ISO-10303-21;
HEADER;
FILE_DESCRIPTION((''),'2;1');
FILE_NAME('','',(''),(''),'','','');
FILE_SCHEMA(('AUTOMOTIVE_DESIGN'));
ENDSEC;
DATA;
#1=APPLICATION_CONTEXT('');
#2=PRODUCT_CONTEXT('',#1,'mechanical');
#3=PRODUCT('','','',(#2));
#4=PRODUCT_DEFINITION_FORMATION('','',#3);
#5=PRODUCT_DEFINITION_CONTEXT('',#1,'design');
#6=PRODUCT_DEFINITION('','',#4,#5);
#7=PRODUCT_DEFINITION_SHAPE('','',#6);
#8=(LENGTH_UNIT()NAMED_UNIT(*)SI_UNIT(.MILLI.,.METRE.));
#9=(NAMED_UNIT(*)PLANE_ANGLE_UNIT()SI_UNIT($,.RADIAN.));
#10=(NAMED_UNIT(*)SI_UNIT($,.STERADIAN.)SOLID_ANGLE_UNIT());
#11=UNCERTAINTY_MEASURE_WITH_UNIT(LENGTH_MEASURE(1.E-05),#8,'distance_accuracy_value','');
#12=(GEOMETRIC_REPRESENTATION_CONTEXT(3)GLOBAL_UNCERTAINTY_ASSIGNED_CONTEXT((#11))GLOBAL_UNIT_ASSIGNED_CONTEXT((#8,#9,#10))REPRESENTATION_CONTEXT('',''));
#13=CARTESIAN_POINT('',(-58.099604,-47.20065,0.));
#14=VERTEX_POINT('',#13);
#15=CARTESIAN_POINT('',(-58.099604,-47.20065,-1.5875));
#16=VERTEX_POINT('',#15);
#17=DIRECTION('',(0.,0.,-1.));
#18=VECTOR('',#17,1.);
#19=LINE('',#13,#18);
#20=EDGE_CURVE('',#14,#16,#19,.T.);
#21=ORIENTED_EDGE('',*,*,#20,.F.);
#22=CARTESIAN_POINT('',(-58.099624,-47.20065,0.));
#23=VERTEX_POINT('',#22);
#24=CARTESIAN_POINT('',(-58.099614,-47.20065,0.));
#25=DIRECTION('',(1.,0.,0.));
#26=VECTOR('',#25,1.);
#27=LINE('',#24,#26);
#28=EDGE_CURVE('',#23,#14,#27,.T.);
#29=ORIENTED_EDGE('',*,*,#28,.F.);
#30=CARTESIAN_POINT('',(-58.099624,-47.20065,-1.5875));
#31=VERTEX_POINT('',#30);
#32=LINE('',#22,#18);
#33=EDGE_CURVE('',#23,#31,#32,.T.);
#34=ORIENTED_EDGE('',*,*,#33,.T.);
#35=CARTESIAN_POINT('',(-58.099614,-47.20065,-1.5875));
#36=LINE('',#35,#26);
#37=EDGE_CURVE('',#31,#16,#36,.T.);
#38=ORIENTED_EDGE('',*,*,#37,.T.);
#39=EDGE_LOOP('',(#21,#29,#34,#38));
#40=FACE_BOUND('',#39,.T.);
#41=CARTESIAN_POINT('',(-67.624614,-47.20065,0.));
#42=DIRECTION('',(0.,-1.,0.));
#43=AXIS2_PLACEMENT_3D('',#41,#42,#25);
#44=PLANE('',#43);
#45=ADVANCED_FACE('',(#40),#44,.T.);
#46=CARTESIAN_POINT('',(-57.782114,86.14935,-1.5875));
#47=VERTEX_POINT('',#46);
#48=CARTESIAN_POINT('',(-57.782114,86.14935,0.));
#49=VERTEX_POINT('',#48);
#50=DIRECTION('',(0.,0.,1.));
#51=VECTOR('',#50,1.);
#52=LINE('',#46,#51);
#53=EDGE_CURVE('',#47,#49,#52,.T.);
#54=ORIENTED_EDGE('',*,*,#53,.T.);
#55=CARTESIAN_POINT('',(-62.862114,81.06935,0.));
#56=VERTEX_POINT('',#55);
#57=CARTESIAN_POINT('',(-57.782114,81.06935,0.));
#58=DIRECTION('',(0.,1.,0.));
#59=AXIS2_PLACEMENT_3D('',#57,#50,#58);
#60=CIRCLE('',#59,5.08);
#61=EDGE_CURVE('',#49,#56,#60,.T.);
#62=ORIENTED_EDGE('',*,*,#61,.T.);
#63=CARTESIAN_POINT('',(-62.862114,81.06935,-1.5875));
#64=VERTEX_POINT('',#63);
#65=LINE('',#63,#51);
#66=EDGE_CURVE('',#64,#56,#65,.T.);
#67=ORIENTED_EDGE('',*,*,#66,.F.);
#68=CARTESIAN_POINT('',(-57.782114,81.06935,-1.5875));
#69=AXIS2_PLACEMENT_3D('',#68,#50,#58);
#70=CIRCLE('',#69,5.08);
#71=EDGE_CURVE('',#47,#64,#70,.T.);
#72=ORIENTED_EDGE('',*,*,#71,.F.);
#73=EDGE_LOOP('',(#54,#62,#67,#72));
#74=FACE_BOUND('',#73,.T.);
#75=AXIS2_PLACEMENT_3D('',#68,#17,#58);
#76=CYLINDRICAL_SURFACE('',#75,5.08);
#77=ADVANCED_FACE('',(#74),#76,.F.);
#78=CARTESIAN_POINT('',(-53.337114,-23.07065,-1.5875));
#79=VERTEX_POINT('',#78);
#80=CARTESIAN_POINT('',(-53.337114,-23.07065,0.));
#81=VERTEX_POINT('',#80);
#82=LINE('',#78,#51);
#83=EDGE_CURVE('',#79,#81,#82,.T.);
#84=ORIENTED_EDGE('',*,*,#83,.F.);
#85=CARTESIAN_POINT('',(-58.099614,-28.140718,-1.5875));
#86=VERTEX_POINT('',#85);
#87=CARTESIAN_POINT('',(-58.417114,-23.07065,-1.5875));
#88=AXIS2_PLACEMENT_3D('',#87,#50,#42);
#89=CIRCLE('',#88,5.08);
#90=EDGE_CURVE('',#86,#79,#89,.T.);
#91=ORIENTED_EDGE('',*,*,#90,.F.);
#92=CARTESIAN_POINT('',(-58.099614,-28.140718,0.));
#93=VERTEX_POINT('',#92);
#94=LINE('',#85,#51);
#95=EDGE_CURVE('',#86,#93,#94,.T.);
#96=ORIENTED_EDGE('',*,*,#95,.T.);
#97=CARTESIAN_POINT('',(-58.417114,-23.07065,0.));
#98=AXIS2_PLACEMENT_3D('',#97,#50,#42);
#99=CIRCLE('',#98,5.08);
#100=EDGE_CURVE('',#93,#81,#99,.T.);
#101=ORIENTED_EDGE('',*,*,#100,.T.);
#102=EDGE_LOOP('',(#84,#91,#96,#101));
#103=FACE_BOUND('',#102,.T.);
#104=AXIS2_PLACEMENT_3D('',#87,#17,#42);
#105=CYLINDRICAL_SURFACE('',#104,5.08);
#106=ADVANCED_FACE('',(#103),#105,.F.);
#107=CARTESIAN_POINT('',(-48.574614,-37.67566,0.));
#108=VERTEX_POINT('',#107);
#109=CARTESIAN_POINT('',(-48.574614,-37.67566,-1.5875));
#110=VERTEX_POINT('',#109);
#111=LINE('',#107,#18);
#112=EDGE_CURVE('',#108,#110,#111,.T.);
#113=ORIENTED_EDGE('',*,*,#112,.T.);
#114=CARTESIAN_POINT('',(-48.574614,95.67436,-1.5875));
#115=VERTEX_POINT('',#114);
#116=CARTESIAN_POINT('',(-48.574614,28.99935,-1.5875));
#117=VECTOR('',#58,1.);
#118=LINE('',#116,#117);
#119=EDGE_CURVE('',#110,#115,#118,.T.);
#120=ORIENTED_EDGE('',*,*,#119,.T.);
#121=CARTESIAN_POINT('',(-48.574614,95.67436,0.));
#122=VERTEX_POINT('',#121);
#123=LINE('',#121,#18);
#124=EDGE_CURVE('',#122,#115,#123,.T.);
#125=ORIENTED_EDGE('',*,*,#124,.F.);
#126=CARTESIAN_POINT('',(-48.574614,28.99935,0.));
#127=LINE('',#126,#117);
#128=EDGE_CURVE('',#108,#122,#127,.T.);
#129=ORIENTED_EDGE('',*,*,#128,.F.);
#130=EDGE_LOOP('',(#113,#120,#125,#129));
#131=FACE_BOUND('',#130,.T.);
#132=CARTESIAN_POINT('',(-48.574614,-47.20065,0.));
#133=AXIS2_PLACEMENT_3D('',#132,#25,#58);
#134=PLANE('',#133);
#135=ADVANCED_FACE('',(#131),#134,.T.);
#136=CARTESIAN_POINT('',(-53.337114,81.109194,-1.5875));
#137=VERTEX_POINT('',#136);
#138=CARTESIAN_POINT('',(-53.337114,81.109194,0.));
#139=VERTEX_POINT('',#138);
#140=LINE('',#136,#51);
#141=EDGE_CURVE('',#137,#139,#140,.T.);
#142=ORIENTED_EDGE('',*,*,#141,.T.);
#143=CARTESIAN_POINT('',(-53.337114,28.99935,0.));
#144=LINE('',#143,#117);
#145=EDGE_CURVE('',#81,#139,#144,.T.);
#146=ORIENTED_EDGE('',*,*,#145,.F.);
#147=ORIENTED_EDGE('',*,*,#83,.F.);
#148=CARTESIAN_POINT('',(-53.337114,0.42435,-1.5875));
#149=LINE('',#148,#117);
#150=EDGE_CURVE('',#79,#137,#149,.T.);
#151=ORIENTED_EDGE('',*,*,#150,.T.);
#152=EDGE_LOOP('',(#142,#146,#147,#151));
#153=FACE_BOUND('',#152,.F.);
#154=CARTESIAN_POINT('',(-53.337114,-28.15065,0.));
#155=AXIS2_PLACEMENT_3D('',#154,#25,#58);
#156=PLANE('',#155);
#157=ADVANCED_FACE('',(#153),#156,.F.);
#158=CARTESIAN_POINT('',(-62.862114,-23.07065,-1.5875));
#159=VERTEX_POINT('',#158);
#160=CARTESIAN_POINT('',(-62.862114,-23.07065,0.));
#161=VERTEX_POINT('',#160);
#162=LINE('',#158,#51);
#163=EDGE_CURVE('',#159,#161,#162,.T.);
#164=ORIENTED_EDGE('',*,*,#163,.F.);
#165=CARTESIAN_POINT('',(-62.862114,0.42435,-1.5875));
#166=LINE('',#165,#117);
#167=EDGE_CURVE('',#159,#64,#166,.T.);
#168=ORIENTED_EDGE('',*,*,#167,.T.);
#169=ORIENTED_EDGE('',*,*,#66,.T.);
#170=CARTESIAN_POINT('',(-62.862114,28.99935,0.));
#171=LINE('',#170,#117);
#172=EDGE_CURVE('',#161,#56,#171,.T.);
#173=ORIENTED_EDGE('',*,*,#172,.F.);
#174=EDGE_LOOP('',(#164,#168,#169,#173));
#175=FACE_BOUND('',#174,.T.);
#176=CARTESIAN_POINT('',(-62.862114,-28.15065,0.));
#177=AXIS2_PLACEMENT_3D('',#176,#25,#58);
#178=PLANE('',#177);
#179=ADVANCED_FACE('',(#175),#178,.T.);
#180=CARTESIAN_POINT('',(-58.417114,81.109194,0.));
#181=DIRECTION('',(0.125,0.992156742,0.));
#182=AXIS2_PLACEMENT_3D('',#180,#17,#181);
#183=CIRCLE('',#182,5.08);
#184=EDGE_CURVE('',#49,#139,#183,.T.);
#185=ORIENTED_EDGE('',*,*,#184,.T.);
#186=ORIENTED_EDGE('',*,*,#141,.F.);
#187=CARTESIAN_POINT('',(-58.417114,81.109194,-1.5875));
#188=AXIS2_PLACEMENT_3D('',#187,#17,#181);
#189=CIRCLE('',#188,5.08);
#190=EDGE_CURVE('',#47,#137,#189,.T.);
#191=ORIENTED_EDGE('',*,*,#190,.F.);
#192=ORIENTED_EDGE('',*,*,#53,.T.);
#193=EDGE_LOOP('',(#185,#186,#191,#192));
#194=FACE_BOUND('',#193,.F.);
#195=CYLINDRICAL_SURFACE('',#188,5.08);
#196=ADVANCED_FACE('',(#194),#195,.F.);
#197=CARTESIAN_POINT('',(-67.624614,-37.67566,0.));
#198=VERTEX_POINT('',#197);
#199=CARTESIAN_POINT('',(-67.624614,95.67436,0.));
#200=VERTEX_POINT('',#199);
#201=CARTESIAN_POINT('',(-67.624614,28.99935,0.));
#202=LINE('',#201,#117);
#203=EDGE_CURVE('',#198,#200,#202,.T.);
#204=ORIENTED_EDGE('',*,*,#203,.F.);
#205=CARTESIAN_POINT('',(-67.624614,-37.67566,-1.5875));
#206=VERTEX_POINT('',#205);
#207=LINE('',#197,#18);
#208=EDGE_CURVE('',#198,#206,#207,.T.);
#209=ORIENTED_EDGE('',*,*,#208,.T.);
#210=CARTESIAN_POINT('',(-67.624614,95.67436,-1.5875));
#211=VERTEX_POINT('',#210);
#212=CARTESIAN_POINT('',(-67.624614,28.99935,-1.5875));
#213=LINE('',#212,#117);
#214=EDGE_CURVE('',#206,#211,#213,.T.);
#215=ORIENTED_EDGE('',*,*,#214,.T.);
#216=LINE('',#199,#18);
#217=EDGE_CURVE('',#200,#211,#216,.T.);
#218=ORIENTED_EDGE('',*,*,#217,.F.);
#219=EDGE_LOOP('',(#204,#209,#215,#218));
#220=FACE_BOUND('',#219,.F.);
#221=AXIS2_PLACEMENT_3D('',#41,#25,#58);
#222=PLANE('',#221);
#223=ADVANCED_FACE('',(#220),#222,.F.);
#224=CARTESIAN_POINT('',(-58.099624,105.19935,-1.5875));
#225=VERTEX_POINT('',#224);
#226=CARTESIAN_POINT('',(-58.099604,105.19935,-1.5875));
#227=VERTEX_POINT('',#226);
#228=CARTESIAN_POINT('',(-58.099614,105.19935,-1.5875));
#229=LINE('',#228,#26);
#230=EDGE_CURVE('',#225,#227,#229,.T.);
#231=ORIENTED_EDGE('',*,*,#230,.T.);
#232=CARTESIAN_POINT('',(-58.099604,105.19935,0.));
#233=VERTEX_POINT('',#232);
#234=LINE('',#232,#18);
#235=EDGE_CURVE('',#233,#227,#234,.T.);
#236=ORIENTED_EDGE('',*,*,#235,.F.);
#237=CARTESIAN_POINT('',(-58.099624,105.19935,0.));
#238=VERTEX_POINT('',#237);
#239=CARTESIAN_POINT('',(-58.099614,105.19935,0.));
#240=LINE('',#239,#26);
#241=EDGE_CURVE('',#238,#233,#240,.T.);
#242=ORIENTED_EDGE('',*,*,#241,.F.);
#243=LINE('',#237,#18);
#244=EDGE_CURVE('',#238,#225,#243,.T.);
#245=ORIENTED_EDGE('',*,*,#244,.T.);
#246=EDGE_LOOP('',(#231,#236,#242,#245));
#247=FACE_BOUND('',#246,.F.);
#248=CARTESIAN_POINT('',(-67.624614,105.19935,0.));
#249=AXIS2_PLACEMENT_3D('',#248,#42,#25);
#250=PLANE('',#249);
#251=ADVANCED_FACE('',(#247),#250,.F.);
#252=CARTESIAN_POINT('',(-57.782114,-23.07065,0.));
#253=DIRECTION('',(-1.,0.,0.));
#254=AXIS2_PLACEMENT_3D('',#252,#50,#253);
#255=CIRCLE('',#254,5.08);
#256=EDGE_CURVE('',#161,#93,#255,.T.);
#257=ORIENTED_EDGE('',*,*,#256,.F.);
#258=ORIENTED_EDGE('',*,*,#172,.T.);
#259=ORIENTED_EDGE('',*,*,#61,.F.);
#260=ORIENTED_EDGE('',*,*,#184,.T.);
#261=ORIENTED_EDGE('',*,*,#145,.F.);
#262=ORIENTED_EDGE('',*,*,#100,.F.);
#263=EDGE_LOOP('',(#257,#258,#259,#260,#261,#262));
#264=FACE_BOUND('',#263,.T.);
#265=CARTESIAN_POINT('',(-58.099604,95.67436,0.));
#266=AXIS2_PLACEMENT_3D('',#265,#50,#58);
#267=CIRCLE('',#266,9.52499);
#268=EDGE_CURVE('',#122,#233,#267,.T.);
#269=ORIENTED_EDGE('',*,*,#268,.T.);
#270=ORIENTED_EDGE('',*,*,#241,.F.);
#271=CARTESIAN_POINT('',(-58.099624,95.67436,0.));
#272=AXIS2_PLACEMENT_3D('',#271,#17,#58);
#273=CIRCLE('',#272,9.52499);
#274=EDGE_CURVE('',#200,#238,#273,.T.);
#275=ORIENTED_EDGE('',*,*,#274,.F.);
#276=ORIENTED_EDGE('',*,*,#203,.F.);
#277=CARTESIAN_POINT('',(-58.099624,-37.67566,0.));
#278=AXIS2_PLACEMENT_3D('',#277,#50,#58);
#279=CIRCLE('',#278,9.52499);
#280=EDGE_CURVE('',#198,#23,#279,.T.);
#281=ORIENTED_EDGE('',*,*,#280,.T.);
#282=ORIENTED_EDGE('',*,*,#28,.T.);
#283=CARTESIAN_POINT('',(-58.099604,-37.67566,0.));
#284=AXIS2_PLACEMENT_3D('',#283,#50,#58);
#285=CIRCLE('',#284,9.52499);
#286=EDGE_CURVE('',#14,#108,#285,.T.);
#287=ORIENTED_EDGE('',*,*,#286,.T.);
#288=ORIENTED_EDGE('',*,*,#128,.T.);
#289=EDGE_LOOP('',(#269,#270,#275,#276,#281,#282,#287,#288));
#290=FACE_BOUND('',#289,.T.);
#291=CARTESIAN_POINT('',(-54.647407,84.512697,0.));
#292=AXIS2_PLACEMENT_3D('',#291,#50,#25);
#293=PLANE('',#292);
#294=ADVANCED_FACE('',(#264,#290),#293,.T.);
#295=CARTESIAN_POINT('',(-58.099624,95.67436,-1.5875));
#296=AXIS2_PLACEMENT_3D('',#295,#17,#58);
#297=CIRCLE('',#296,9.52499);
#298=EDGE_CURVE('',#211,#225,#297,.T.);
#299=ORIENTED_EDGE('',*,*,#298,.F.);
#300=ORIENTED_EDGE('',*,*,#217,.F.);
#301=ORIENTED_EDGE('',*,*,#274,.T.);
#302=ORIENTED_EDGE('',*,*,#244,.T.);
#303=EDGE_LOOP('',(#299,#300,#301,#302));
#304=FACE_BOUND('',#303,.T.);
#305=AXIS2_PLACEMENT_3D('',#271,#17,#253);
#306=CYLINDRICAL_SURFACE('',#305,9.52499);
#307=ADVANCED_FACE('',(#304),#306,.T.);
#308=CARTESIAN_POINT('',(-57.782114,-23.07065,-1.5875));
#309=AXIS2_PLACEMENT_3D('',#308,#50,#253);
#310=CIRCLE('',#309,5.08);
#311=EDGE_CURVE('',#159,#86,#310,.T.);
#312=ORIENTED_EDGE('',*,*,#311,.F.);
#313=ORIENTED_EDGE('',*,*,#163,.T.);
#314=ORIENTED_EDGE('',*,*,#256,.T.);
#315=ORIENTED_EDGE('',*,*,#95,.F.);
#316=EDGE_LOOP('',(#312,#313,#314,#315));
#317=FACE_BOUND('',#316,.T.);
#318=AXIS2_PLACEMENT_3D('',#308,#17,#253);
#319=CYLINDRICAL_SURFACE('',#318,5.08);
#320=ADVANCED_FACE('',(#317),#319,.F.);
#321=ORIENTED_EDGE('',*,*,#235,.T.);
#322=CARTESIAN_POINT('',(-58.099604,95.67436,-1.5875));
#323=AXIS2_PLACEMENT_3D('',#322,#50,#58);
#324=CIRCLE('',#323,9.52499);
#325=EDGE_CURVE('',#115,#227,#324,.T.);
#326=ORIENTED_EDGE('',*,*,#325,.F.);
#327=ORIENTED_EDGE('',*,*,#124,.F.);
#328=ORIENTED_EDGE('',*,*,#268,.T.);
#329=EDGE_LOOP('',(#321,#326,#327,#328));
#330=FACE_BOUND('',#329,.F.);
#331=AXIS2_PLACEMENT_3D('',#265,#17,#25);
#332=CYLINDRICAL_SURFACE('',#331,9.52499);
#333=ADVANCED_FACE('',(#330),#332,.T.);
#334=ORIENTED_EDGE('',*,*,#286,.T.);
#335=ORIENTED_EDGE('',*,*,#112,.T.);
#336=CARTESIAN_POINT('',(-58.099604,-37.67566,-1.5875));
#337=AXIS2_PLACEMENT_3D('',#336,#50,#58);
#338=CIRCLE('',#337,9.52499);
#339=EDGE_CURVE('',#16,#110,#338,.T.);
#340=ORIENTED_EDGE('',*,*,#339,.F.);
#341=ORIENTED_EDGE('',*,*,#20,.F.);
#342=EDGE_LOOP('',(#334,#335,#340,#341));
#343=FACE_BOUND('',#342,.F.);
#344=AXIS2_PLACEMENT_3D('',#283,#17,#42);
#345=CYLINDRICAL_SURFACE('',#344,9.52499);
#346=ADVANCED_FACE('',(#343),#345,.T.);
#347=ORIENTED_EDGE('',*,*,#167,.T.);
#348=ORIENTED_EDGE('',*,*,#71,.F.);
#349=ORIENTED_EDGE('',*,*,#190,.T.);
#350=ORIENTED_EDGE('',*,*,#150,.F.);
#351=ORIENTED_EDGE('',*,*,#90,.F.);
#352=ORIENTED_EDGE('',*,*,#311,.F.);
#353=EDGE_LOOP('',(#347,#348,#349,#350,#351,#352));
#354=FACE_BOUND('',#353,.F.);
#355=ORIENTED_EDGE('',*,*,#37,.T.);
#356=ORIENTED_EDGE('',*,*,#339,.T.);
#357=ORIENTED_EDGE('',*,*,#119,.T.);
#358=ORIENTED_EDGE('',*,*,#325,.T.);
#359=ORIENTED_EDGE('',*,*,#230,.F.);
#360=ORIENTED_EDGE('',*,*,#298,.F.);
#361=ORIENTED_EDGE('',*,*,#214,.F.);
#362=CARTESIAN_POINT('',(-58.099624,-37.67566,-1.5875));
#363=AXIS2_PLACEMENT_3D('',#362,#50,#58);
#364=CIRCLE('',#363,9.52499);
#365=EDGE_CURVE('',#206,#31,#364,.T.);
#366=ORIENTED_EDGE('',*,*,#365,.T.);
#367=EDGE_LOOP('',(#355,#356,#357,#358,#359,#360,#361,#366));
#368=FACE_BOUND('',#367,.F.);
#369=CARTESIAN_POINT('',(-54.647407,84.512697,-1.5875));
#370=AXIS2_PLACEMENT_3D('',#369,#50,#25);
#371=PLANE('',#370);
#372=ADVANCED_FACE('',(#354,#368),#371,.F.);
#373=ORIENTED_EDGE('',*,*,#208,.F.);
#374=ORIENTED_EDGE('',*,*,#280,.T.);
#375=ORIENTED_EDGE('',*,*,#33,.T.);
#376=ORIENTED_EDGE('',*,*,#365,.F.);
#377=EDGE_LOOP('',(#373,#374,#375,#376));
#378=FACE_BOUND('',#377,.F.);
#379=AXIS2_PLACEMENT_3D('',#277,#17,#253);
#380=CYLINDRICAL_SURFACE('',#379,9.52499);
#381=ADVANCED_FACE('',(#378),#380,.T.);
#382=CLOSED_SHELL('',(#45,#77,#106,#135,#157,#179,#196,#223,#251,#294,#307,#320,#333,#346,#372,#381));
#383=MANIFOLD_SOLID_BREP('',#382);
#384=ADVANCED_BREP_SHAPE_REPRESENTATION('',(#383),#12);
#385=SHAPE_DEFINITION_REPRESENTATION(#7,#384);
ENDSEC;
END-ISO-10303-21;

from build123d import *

# Parameters (mm, degrees)
F0_W        = 19.05
F0_H        = 152.4
F1_DEPTH    = 1.5875
F2_R        = 9.52499
F4_W        = 9.525
F4_H        = 114.3
F5_DEPTH    = 25.4
F6_T1_DEPTH = 1.5875
F7_T1_DEPTH = 1.5875


# Not quite as in the source:
# - a fillet or chamfer that OpenCascade refuses, or shapes differently, is made with other operations: its cross-section is extruded or revolved along the edge and cut away or added
# - a fillet or chamfer is up to 0.001 mm smaller than in the source, because OpenCascade refuses the exact size


with BuildPart() as f1:
    # F0 (on Top) → F1 (new body)
    with BuildSketch(Plane.XY):
        with Locations((-58.0996136427, 28.9993500233)):
            Rectangle(F0_W, F0_H)
    extrude(amount=-F1_DEPTH)

    # F2 (radius 9.525 in the source; OpenCascade refuses exactly that, so slightly less here)
    f2_edges = [f1.edges().sort_by_distance(p)[0] for p in [
        (-48.574614, -47.20065, -0.79375),
        (-67.624614, -47.20065, -0.79375),
        (-48.574614, 105.19935, -0.79375),
        (-67.624614, 105.19935, -0.79375),
    ]]
    fillet(f2_edges, radius=F2_R)

    # F4 (on offset) → F5 (cut)
    with BuildSketch(Plane.XY):
        with Locations((-58.0996136427, 28.9993500233)):
            Rectangle(F4_W, F4_H)
    extrude(amount=-F5_DEPTH, mode=Mode.SUBTRACT)

    # F6: fillet of radius 5.08 on 3 edges, made by hand

    # F6_s2 → F6_t1 (join)
    with BuildSketch(Plane.XY.offset(-1.5875)):
        with BuildLine():
            ThreePointArc((-62.8621136427, -23.0706499767), (-61.3742160911, -26.6627524252), (-57.7821136427, -28.1506499767))
            Line((-57.7821136427, -28.1506499767), (-62.8621136427, -28.1506499767))
            Line((-62.8621136427, -28.1506499767), (-62.8621136427, -23.0706499767))
        make_face()
        with BuildLine():
            ThreePointArc((-57.7821136427, 86.1493500233), (-61.3742160911, 84.6614524717), (-62.8621136427, 81.0693500233))
            Line((-62.8621136427, 81.0693500233), (-62.8621136427, 86.1493500233))
            Line((-62.8621136427, 86.1493500233), (-57.7821136427, 86.1493500233))
        make_face()
        with BuildLine():
            ThreePointArc((-58.4171136427, -28.1506499767), (-54.8250111943, -26.6627524252), (-53.3371136427, -23.0706499767))
            Line((-53.3371136427, -23.0706499767), (-53.3371136427, -28.1506499767))
            Line((-53.3371136427, -28.1506499767), (-58.4171136427, -28.1506499767))
        make_face()
    extrude(amount=F6_T1_DEPTH)

    # F7: fillet of radius 5.08 on 1 edges, made by hand

    # F7_s2 → F7_t1 (join)
    with BuildSketch(Plane.XY.offset(-1.5875)):
        with BuildLine():
            ThreePointArc((-57.7821136427, 86.1493500233), (-54.6071136427, 84.4692979408), (-53.3371136427, 81.1091937757))
            Line((-53.3371136427, 81.1091937757), (-53.3371136427, 86.1493500233))
            Line((-53.3371136427, 86.1493500233), (-57.7821136427, 86.1493500233))
        make_face()
    extrude(amount=F7_T1_DEPTH)


solid = f1.part
